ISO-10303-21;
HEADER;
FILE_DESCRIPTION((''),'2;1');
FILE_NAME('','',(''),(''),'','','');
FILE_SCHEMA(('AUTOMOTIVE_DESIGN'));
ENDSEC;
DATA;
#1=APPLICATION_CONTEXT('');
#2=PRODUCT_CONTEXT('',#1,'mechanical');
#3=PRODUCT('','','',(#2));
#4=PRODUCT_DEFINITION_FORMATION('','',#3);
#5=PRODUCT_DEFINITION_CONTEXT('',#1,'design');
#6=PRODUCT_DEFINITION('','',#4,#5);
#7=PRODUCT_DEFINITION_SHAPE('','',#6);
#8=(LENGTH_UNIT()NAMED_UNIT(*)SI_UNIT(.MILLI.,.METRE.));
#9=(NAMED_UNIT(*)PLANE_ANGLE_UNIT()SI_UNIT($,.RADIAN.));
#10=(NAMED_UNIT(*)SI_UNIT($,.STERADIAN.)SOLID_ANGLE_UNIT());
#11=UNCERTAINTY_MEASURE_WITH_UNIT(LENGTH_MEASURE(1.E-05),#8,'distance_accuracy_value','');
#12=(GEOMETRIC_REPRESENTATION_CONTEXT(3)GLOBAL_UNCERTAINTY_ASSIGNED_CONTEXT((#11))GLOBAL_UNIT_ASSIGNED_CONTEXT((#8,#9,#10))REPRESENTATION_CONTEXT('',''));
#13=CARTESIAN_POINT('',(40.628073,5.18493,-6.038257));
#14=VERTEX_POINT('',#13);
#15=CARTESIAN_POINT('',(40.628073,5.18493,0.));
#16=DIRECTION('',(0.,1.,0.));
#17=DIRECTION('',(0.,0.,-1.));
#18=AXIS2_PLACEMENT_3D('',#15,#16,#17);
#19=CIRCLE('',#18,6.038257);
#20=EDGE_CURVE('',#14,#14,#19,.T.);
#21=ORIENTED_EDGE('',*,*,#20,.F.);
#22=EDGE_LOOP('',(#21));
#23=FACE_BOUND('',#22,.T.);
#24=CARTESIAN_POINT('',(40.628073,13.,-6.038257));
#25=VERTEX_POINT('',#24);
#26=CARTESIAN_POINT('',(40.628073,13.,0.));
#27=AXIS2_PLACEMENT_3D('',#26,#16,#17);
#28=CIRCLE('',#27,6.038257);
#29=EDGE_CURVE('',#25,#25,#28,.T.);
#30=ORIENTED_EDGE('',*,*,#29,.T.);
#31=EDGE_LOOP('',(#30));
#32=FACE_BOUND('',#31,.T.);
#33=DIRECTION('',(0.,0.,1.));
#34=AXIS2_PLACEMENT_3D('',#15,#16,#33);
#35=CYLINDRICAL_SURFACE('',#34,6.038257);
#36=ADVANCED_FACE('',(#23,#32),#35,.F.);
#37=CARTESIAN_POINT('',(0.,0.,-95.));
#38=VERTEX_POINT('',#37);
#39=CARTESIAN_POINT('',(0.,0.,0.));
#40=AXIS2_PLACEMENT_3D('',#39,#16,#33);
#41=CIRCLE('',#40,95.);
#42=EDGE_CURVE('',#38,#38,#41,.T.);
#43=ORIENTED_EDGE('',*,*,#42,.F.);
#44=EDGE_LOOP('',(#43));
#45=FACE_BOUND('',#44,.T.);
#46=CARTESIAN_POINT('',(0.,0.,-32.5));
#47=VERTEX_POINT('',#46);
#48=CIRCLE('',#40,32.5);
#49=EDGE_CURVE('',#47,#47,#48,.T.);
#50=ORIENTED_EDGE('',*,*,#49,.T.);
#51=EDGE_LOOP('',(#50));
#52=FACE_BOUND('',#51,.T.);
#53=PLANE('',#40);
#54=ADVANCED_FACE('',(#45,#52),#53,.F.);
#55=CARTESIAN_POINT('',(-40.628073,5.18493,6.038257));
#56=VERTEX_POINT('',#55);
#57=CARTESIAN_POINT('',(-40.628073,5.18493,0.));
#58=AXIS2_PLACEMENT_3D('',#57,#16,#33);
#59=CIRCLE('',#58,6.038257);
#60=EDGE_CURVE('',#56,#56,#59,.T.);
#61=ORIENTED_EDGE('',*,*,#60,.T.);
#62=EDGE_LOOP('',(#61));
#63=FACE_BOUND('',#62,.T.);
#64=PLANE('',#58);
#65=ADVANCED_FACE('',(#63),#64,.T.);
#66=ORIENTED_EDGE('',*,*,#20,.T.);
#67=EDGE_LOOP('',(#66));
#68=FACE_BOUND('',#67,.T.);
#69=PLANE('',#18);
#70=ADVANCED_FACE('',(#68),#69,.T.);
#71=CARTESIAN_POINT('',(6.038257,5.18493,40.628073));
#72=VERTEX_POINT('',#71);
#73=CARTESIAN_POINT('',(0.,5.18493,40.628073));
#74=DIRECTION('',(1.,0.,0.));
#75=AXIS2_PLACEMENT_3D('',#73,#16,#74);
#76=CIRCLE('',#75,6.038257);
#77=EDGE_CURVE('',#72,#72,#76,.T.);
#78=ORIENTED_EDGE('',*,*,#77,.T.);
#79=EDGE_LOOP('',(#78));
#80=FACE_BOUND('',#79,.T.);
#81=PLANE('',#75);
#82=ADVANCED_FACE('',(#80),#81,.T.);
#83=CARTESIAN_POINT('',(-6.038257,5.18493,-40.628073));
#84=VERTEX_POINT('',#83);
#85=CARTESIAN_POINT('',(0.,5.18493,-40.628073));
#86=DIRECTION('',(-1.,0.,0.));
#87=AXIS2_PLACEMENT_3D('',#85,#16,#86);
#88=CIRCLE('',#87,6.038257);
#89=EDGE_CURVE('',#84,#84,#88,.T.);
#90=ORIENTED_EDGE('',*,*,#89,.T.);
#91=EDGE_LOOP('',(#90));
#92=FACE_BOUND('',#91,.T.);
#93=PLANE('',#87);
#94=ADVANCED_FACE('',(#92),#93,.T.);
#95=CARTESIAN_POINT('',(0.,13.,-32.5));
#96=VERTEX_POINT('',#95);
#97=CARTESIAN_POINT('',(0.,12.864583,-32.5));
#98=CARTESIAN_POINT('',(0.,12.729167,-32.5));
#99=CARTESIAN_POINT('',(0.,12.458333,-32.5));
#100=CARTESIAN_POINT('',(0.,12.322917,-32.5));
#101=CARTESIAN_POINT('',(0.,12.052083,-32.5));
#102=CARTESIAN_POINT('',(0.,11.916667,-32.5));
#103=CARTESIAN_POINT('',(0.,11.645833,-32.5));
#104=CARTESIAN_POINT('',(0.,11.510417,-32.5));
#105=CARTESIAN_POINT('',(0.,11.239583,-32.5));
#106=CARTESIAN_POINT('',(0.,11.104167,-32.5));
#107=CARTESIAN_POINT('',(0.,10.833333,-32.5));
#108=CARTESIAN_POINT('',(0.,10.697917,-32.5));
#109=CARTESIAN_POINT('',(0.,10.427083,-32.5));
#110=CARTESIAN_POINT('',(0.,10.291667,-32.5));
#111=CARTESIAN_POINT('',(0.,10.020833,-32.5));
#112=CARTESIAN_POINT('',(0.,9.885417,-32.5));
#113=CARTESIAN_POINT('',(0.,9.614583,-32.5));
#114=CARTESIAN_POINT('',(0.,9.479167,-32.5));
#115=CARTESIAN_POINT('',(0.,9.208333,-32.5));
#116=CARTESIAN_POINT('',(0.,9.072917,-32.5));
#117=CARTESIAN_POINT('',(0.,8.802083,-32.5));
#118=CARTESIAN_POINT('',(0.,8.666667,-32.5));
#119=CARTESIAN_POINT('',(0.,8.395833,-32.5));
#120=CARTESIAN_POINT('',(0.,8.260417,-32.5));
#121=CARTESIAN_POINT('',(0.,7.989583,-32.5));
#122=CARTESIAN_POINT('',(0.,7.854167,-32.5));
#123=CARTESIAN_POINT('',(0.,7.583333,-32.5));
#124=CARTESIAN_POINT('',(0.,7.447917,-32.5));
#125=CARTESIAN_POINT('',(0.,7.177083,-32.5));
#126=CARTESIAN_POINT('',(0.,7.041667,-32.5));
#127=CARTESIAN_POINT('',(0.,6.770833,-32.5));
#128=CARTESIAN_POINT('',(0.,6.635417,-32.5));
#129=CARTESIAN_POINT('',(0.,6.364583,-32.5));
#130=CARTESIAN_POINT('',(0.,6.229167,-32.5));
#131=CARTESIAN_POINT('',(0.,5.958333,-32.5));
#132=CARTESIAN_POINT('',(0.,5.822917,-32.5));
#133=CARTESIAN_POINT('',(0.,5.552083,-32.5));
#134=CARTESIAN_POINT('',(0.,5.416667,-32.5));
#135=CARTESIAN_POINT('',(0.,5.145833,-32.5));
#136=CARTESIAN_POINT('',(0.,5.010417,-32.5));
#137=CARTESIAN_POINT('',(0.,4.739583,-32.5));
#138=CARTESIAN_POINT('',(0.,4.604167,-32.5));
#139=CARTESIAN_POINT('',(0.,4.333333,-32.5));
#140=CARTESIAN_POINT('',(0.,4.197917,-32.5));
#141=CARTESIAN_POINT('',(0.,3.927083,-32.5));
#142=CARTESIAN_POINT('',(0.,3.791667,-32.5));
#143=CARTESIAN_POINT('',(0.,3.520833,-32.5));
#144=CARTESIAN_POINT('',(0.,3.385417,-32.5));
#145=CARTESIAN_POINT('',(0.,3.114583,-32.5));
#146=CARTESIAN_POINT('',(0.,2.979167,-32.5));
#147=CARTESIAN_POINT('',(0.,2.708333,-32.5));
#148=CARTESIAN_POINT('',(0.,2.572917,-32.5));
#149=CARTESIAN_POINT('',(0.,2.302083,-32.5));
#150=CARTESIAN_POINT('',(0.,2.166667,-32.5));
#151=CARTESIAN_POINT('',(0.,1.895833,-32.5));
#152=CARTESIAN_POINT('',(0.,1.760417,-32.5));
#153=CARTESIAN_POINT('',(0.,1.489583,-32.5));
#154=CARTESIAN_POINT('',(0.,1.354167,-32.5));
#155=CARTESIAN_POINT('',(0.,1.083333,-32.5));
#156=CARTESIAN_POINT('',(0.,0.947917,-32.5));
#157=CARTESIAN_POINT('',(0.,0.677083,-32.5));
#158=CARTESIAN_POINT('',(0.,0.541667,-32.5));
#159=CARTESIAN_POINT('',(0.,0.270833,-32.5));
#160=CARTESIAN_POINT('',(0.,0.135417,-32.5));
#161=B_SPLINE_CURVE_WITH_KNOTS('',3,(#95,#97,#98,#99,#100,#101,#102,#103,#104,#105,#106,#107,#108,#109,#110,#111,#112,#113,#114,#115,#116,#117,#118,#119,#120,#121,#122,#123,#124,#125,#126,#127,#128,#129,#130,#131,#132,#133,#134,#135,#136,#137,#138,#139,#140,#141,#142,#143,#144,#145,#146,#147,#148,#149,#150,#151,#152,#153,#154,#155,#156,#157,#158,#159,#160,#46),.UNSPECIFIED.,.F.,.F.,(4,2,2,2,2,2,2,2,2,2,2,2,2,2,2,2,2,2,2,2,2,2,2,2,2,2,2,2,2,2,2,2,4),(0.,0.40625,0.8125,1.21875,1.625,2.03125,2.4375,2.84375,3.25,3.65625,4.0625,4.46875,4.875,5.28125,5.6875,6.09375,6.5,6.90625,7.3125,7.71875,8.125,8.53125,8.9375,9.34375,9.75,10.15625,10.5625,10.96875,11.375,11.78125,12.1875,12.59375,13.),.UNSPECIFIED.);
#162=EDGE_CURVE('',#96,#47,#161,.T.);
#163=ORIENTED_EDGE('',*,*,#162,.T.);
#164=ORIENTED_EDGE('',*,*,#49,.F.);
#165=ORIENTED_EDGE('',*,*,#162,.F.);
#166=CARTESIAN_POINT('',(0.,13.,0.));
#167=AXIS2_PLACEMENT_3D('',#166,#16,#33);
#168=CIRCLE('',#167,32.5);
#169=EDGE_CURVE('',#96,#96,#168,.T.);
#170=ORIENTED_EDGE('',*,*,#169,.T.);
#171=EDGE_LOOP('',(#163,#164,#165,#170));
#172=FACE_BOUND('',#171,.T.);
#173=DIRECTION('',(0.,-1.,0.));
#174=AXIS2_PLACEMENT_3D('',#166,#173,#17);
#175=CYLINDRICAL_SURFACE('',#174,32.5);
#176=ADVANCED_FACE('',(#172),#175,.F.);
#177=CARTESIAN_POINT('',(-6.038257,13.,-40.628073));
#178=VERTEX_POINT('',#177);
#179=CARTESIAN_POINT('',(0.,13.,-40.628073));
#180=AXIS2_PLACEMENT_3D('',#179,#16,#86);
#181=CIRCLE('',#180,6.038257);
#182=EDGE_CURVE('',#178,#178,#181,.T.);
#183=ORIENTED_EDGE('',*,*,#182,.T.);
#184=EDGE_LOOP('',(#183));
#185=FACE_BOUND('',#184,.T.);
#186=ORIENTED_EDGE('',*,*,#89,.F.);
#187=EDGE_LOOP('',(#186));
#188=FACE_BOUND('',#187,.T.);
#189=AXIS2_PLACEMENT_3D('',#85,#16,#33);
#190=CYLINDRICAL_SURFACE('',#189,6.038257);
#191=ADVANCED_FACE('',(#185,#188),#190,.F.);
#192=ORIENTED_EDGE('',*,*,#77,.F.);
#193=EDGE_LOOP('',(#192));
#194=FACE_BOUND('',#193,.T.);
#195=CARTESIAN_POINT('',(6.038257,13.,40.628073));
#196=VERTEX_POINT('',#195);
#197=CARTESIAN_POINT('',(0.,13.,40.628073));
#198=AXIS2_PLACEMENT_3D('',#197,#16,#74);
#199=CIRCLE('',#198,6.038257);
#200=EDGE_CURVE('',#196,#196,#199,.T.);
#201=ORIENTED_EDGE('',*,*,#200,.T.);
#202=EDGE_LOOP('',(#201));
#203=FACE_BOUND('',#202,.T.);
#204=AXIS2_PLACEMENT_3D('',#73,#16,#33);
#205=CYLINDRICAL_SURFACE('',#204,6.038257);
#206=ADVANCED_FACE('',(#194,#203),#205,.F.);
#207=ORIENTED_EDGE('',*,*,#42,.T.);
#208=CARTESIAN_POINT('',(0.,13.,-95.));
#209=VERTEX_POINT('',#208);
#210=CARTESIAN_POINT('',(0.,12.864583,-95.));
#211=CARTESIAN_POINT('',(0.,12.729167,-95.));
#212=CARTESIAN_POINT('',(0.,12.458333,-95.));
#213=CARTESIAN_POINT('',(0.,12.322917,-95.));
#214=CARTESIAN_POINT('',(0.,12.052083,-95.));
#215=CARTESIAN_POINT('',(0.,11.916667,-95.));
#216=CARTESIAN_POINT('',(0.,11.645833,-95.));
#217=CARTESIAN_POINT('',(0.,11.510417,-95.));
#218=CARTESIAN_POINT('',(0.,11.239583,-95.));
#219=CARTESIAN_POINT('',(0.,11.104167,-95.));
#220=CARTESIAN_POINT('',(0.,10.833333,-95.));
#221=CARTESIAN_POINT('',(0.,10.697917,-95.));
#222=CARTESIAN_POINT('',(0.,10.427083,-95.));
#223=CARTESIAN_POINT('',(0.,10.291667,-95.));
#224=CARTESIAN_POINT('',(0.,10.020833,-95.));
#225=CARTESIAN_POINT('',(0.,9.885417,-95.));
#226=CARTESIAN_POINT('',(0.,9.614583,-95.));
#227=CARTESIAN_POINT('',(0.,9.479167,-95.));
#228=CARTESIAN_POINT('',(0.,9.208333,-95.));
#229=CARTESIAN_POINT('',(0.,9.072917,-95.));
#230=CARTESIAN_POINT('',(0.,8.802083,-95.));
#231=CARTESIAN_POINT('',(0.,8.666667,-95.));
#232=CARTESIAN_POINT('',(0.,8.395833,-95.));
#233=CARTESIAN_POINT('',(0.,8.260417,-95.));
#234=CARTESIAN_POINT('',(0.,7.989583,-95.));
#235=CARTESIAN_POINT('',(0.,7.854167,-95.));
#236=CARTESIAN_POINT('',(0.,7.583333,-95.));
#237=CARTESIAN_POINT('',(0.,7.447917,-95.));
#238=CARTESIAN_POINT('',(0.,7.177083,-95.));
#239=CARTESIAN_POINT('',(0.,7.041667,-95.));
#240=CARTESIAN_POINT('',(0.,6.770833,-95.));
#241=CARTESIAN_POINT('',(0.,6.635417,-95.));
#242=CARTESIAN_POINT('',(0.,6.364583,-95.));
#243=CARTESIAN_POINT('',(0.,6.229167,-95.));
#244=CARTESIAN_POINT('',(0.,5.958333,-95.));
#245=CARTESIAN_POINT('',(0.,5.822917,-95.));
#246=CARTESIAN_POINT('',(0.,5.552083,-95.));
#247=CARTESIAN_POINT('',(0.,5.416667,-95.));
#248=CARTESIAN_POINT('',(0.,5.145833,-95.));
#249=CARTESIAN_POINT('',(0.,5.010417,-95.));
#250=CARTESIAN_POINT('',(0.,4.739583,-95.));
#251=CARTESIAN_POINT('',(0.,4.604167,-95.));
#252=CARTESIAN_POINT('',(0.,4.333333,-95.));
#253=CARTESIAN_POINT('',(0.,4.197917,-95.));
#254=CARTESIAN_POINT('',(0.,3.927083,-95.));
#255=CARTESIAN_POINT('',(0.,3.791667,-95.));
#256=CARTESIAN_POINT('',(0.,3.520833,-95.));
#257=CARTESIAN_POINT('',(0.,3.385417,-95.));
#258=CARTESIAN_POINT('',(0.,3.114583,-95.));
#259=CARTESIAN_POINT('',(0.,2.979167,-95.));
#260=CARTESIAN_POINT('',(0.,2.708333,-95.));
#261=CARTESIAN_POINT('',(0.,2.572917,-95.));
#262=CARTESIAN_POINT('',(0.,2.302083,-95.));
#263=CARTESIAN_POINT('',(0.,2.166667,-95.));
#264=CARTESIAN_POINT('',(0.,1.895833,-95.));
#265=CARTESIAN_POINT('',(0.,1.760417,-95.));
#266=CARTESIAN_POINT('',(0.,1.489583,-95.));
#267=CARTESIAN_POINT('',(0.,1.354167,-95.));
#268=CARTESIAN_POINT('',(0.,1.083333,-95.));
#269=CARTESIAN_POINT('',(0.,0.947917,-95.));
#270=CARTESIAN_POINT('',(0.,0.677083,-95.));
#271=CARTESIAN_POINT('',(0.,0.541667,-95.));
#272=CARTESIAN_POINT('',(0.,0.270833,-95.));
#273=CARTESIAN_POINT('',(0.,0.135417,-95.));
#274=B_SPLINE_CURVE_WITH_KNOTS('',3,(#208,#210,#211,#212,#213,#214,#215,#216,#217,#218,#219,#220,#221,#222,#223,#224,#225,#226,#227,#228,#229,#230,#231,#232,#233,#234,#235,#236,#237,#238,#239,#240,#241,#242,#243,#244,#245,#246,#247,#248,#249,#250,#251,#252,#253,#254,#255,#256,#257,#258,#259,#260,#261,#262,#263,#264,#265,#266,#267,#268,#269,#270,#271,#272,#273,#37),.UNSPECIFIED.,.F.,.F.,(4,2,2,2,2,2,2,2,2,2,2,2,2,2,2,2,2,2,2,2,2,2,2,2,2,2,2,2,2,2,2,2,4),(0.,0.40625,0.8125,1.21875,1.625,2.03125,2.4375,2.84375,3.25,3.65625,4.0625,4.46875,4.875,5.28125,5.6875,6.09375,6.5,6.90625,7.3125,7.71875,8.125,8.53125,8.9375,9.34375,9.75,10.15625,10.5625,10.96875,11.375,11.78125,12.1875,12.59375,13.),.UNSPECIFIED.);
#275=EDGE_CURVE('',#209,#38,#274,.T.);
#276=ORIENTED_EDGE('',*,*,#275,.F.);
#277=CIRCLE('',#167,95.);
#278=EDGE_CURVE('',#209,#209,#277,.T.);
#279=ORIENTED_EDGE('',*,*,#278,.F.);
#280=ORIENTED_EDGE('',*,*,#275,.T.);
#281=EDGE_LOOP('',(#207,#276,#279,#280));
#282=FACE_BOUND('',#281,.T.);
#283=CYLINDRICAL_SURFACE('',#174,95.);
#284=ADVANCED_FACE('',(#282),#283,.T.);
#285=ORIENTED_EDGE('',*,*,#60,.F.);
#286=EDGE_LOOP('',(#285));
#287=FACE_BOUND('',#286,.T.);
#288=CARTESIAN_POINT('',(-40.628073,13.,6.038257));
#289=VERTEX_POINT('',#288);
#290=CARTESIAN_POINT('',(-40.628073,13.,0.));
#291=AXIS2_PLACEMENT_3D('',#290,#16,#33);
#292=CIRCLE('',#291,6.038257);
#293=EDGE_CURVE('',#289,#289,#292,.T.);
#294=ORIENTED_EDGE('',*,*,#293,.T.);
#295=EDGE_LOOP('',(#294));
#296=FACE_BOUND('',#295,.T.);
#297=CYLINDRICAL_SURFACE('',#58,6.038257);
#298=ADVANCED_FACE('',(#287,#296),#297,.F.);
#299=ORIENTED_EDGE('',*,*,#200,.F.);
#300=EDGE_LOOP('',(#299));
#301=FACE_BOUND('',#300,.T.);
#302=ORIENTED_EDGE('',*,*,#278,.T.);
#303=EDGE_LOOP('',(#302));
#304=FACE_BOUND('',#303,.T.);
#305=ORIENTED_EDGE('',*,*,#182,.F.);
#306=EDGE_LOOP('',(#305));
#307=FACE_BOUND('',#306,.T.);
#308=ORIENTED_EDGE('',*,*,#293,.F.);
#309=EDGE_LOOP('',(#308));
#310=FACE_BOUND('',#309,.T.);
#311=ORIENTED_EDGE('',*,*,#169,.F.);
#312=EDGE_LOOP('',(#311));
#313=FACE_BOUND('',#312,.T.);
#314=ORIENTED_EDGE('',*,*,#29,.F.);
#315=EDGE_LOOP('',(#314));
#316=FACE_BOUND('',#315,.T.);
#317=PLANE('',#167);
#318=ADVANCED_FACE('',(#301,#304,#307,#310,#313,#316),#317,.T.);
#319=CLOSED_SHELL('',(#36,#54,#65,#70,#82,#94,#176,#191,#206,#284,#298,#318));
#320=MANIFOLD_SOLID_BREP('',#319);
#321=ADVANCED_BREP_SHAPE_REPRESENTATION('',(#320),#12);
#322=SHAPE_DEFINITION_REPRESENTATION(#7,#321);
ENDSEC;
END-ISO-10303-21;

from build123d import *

# Parameters (mm, degrees)
SKETCH1_R           = 95
BOSS_EXTRUDE1_DEPTH = 13
SKETCH2_R           = 32.5
CUT_EXTRUDE1_DEPTH  = 135.977775948
SKETCH3_R           = 6.03825694
CUT_EXTRUDE2_DEPTH  = 7.815070398
CIRPATTERN1_COUNT   = 4


with BuildPart() as part:
    # Sketch1 → Boss-Extrude1 (new body)
    with BuildSketch(Plane(origin=(0, 0, 0), x_dir=(1, 0, 0), z_dir=(0, 1, 0))):
        Circle(SKETCH1_R)
    extrude(amount=BOSS_EXTRUDE1_DEPTH)

    # Sketch2 → Cut-Extrude1 (cut, through all)
    with BuildSketch(Plane(origin=(0, 0, 0), x_dir=(1, 0, 0), z_dir=(0, 1, 0))):
        Circle(SKETCH2_R)
    extrude(amount=CUT_EXTRUDE1_DEPTH, mode=Mode.SUBTRACT)

    # Sketch3 → Cut-Extrude2 (cut)
    with BuildSketch(Plane(origin=(0, 13, 0), x_dir=(1, 0, 0), z_dir=(0, 1, 0))):
        with Locations((-40.6280725, 0)):
            Circle(SKETCH3_R)
    cut_extrude2 = extrude(amount=-CUT_EXTRUDE2_DEPTH, mode=Mode.SUBTRACT)

    # CirPattern1: Cut-Extrude2 ×4 about axis
    cirpattern1_axis = Axis((0, 0, 0), (0, 1, 0))
    for i in range(1, CIRPATTERN1_COUNT):
        add(cut_extrude2.rotate(cirpattern1_axis, i * 360 / CIRPATTERN1_COUNT), mode=Mode.SUBTRACT)


solid = part.part
